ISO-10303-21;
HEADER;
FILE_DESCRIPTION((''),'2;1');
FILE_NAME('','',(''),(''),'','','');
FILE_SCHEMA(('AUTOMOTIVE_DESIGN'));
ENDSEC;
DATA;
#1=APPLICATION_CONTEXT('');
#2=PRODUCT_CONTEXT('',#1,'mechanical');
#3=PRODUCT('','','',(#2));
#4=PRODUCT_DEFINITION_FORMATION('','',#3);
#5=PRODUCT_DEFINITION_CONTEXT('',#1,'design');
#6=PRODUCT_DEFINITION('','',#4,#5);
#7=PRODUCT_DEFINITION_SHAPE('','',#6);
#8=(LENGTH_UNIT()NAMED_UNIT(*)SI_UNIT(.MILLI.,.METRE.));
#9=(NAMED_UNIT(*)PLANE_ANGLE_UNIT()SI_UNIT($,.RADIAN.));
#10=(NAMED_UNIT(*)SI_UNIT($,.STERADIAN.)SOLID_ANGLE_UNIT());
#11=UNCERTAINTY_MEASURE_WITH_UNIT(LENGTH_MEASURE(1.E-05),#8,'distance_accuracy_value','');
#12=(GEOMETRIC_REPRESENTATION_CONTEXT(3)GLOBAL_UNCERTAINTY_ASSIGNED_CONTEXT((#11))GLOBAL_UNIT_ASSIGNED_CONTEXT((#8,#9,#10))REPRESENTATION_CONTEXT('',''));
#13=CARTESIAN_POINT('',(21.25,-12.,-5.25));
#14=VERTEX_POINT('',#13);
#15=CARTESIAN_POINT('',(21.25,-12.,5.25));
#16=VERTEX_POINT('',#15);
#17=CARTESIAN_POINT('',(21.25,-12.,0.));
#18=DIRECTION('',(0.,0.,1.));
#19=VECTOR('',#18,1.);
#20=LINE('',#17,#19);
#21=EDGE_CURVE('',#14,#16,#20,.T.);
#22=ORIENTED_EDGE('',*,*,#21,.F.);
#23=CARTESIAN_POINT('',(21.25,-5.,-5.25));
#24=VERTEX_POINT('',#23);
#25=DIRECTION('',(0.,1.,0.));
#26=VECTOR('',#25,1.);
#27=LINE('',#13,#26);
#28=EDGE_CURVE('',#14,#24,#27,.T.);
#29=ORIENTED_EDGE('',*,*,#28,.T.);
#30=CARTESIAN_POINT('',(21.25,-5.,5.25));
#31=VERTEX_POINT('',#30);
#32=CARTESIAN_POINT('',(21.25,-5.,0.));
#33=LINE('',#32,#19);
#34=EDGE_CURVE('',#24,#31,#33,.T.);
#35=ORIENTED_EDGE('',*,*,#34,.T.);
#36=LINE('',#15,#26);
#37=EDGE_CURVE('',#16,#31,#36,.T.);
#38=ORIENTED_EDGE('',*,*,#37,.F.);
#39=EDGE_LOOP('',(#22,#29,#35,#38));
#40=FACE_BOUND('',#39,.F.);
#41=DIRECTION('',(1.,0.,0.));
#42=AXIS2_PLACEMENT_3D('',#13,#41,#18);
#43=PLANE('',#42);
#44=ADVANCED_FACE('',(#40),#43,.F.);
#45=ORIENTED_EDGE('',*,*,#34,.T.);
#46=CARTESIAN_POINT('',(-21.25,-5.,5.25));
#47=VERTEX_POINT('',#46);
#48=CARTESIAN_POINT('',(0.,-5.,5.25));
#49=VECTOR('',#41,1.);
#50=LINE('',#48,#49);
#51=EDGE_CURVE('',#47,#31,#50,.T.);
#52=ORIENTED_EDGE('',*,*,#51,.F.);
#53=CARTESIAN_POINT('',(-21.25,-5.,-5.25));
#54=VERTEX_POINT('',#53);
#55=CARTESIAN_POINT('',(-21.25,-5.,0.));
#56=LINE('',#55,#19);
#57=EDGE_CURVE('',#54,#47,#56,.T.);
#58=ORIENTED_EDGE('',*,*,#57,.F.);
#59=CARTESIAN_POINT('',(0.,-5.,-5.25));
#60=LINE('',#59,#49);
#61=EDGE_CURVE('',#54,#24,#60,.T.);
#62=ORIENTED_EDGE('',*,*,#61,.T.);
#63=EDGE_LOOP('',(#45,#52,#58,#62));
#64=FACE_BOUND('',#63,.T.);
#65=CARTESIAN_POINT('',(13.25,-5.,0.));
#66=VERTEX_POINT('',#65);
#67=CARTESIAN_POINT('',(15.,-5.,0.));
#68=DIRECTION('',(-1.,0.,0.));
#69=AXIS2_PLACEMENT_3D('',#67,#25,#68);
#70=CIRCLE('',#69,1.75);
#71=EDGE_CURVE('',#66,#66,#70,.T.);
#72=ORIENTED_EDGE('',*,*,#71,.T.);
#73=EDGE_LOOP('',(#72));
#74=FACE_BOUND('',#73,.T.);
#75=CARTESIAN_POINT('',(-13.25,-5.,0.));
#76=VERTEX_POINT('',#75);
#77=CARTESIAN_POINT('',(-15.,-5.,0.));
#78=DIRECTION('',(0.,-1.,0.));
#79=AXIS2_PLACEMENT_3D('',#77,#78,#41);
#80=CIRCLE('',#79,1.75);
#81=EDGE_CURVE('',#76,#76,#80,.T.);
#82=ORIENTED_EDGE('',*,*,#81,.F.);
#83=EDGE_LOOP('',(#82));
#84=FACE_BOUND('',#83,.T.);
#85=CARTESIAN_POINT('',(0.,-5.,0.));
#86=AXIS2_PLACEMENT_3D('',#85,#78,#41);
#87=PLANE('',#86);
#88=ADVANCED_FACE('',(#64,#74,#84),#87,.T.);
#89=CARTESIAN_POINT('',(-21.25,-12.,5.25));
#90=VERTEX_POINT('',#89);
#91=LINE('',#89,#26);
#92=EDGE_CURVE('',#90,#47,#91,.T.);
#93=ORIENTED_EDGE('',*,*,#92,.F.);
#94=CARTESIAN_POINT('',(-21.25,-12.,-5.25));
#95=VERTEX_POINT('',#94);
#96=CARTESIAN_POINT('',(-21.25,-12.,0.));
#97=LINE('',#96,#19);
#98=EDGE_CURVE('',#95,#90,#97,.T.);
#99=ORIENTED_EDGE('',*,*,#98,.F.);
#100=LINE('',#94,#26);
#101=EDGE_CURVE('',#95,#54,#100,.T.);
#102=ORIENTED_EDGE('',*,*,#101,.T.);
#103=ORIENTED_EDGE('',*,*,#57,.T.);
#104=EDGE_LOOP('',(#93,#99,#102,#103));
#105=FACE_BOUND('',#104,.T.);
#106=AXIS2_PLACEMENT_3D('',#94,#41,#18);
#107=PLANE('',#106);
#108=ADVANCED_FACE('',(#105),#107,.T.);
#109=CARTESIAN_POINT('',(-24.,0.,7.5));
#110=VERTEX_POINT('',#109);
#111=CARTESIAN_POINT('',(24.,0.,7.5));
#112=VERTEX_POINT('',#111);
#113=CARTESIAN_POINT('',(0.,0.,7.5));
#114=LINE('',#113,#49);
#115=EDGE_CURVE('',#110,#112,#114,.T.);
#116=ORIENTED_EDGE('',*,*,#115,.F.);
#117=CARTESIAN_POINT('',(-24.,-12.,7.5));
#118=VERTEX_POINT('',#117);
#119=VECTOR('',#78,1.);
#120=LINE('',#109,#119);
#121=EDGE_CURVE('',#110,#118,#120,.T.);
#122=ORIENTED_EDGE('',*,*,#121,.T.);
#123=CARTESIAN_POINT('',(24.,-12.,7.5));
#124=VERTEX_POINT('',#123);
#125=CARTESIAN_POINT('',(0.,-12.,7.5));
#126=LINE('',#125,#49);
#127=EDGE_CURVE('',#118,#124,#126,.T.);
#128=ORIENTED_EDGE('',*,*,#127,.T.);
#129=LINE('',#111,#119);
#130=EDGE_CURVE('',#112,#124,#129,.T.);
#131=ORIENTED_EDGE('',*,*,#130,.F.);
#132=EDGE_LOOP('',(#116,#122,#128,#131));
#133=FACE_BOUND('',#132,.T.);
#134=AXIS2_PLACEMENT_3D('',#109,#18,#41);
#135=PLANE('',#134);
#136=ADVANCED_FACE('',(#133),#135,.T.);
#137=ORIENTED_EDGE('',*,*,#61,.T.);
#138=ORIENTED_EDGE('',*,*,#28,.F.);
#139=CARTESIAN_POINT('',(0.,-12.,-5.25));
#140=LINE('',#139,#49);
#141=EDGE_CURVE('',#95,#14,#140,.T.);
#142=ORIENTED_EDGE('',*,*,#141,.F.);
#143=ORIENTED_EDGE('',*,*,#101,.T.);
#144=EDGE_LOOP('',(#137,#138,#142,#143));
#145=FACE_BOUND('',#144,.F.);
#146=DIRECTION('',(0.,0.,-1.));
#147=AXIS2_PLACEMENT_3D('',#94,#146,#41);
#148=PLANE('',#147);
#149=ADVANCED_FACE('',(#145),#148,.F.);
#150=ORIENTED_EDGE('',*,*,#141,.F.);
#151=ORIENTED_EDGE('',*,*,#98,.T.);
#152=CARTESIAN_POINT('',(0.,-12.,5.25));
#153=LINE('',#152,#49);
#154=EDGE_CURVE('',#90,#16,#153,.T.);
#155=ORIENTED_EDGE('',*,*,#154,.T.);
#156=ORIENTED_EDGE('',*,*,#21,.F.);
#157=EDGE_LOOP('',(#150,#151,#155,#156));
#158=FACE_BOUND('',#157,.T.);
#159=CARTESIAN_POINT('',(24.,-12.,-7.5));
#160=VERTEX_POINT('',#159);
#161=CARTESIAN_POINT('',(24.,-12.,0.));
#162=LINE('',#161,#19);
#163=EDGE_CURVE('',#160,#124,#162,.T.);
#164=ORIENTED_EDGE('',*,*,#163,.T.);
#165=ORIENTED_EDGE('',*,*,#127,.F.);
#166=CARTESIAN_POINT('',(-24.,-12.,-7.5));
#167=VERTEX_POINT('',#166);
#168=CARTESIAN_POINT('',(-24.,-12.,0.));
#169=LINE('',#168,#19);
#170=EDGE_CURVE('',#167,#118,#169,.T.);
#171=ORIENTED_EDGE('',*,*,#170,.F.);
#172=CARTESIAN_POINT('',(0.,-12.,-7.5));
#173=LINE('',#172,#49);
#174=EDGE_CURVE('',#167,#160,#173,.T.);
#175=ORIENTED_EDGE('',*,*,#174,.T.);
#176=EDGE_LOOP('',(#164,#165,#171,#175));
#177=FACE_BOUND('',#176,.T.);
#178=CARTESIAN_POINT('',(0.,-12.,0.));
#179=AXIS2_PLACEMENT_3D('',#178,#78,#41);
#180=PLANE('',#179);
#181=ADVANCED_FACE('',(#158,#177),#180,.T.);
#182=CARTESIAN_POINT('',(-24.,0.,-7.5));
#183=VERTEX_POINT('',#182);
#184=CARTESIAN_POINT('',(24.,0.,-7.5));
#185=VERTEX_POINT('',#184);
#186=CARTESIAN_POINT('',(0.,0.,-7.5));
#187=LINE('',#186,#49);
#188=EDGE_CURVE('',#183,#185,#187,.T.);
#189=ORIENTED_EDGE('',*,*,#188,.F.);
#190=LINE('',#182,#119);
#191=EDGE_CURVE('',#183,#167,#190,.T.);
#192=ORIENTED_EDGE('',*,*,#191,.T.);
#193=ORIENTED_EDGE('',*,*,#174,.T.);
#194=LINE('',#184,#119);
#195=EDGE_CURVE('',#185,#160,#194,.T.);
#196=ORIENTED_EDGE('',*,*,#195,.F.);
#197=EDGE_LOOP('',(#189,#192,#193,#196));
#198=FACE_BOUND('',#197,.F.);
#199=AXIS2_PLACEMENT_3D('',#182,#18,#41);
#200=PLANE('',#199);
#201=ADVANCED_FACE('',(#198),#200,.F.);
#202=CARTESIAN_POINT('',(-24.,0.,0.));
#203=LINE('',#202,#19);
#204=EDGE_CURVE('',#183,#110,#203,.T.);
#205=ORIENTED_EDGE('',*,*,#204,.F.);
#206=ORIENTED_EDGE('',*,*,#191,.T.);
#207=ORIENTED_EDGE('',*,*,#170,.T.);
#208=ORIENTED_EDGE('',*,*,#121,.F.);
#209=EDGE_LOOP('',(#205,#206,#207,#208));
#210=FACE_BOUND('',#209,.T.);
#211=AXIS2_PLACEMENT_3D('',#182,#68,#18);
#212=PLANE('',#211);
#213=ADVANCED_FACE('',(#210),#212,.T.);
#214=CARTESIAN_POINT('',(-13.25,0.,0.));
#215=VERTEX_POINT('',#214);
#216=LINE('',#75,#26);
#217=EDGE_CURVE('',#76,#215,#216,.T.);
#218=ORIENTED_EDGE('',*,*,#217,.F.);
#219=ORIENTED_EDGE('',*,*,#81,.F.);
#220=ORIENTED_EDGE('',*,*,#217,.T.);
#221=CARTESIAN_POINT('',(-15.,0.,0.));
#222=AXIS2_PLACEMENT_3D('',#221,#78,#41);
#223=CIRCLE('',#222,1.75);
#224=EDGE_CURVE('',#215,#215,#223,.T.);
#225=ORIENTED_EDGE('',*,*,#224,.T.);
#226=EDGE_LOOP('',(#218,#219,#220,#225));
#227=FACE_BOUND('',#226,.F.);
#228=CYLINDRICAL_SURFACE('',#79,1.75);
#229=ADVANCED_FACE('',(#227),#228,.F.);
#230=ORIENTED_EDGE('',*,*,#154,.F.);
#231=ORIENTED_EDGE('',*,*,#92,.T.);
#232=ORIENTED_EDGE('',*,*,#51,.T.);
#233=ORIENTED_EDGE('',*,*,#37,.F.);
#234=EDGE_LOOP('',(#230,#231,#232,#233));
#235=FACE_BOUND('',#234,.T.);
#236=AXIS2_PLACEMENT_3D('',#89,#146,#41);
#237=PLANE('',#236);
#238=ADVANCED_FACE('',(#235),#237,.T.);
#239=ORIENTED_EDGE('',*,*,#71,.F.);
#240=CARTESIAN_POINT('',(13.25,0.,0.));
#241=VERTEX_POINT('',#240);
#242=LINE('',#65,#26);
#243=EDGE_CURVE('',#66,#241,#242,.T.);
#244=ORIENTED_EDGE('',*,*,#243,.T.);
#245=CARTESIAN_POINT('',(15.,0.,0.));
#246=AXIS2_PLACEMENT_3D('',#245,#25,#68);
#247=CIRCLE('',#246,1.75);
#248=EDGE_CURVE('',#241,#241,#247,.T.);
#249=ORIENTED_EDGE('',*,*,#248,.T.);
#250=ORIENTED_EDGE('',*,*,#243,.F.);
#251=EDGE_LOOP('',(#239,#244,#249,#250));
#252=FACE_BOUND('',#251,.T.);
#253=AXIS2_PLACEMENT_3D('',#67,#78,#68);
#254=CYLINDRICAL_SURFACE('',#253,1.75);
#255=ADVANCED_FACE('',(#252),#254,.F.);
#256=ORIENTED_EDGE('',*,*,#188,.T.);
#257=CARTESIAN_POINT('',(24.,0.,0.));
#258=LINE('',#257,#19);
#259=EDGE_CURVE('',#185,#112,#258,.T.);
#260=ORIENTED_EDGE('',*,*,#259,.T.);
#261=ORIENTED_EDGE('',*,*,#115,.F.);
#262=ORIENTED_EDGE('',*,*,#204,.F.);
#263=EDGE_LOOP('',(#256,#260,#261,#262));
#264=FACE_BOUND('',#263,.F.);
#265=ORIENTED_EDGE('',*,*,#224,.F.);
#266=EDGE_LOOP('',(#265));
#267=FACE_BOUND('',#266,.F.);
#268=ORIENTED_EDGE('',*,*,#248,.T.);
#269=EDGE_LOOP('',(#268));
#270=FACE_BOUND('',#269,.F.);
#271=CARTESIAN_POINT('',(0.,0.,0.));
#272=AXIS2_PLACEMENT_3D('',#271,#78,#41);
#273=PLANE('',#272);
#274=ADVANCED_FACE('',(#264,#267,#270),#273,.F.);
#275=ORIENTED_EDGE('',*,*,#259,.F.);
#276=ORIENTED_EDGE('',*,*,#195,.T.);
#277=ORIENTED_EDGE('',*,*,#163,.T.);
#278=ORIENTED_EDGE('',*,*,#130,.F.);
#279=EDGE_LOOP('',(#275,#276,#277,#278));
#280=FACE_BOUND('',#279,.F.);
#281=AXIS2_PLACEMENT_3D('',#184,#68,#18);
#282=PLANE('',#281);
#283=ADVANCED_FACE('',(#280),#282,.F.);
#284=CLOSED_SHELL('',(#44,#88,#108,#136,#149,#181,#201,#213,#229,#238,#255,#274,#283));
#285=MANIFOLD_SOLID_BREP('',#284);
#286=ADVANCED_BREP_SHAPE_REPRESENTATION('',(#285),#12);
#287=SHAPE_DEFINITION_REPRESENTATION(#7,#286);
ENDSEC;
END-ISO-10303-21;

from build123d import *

# Parameters (mm, degrees)
F0_W     = 48
F0_H     = 15
F1_DEPTH = 12
F2_W     = 42.5
F2_H     = 10.5
F3_DEPTH = 7
F4_R     = 1.75
F5_DEPTH = 5


# Not quite as in the source:
# - a pattern or mirror of a feature is missing from the dataset's text; its kind, count and spacing are read off the source's solid


with BuildPart() as f1:
    # F0 (on Front) → F1 (new body)
    with BuildSketch(Plane.XZ):
        Rectangle(F0_W, F0_H)
    extrude(amount=F1_DEPTH)

    # F2 (on face) → F3 (cut)
    with BuildSketch(Plane.XZ.offset(12)):
        Rectangle(F2_W, F2_H)
    extrude(amount=-F3_DEPTH, mode=Mode.SUBTRACT)

    # F4 (on face) → F5 (cut, through all)
    with BuildSketch(Plane.XZ.offset(5)):
        with Locations((-15, 0)):
            Circle(F4_R)
    f5 = extrude(amount=-F5_DEPTH, mode=Mode.SUBTRACT)

    # F5_copies: F5 across plane
    add(f5.mirror(Plane(origin=(0, 0, 0), x_dir=(0, 0, 1), z_dir=(1, 0, 0))), mode=Mode.SUBTRACT)


solid = f1.part
